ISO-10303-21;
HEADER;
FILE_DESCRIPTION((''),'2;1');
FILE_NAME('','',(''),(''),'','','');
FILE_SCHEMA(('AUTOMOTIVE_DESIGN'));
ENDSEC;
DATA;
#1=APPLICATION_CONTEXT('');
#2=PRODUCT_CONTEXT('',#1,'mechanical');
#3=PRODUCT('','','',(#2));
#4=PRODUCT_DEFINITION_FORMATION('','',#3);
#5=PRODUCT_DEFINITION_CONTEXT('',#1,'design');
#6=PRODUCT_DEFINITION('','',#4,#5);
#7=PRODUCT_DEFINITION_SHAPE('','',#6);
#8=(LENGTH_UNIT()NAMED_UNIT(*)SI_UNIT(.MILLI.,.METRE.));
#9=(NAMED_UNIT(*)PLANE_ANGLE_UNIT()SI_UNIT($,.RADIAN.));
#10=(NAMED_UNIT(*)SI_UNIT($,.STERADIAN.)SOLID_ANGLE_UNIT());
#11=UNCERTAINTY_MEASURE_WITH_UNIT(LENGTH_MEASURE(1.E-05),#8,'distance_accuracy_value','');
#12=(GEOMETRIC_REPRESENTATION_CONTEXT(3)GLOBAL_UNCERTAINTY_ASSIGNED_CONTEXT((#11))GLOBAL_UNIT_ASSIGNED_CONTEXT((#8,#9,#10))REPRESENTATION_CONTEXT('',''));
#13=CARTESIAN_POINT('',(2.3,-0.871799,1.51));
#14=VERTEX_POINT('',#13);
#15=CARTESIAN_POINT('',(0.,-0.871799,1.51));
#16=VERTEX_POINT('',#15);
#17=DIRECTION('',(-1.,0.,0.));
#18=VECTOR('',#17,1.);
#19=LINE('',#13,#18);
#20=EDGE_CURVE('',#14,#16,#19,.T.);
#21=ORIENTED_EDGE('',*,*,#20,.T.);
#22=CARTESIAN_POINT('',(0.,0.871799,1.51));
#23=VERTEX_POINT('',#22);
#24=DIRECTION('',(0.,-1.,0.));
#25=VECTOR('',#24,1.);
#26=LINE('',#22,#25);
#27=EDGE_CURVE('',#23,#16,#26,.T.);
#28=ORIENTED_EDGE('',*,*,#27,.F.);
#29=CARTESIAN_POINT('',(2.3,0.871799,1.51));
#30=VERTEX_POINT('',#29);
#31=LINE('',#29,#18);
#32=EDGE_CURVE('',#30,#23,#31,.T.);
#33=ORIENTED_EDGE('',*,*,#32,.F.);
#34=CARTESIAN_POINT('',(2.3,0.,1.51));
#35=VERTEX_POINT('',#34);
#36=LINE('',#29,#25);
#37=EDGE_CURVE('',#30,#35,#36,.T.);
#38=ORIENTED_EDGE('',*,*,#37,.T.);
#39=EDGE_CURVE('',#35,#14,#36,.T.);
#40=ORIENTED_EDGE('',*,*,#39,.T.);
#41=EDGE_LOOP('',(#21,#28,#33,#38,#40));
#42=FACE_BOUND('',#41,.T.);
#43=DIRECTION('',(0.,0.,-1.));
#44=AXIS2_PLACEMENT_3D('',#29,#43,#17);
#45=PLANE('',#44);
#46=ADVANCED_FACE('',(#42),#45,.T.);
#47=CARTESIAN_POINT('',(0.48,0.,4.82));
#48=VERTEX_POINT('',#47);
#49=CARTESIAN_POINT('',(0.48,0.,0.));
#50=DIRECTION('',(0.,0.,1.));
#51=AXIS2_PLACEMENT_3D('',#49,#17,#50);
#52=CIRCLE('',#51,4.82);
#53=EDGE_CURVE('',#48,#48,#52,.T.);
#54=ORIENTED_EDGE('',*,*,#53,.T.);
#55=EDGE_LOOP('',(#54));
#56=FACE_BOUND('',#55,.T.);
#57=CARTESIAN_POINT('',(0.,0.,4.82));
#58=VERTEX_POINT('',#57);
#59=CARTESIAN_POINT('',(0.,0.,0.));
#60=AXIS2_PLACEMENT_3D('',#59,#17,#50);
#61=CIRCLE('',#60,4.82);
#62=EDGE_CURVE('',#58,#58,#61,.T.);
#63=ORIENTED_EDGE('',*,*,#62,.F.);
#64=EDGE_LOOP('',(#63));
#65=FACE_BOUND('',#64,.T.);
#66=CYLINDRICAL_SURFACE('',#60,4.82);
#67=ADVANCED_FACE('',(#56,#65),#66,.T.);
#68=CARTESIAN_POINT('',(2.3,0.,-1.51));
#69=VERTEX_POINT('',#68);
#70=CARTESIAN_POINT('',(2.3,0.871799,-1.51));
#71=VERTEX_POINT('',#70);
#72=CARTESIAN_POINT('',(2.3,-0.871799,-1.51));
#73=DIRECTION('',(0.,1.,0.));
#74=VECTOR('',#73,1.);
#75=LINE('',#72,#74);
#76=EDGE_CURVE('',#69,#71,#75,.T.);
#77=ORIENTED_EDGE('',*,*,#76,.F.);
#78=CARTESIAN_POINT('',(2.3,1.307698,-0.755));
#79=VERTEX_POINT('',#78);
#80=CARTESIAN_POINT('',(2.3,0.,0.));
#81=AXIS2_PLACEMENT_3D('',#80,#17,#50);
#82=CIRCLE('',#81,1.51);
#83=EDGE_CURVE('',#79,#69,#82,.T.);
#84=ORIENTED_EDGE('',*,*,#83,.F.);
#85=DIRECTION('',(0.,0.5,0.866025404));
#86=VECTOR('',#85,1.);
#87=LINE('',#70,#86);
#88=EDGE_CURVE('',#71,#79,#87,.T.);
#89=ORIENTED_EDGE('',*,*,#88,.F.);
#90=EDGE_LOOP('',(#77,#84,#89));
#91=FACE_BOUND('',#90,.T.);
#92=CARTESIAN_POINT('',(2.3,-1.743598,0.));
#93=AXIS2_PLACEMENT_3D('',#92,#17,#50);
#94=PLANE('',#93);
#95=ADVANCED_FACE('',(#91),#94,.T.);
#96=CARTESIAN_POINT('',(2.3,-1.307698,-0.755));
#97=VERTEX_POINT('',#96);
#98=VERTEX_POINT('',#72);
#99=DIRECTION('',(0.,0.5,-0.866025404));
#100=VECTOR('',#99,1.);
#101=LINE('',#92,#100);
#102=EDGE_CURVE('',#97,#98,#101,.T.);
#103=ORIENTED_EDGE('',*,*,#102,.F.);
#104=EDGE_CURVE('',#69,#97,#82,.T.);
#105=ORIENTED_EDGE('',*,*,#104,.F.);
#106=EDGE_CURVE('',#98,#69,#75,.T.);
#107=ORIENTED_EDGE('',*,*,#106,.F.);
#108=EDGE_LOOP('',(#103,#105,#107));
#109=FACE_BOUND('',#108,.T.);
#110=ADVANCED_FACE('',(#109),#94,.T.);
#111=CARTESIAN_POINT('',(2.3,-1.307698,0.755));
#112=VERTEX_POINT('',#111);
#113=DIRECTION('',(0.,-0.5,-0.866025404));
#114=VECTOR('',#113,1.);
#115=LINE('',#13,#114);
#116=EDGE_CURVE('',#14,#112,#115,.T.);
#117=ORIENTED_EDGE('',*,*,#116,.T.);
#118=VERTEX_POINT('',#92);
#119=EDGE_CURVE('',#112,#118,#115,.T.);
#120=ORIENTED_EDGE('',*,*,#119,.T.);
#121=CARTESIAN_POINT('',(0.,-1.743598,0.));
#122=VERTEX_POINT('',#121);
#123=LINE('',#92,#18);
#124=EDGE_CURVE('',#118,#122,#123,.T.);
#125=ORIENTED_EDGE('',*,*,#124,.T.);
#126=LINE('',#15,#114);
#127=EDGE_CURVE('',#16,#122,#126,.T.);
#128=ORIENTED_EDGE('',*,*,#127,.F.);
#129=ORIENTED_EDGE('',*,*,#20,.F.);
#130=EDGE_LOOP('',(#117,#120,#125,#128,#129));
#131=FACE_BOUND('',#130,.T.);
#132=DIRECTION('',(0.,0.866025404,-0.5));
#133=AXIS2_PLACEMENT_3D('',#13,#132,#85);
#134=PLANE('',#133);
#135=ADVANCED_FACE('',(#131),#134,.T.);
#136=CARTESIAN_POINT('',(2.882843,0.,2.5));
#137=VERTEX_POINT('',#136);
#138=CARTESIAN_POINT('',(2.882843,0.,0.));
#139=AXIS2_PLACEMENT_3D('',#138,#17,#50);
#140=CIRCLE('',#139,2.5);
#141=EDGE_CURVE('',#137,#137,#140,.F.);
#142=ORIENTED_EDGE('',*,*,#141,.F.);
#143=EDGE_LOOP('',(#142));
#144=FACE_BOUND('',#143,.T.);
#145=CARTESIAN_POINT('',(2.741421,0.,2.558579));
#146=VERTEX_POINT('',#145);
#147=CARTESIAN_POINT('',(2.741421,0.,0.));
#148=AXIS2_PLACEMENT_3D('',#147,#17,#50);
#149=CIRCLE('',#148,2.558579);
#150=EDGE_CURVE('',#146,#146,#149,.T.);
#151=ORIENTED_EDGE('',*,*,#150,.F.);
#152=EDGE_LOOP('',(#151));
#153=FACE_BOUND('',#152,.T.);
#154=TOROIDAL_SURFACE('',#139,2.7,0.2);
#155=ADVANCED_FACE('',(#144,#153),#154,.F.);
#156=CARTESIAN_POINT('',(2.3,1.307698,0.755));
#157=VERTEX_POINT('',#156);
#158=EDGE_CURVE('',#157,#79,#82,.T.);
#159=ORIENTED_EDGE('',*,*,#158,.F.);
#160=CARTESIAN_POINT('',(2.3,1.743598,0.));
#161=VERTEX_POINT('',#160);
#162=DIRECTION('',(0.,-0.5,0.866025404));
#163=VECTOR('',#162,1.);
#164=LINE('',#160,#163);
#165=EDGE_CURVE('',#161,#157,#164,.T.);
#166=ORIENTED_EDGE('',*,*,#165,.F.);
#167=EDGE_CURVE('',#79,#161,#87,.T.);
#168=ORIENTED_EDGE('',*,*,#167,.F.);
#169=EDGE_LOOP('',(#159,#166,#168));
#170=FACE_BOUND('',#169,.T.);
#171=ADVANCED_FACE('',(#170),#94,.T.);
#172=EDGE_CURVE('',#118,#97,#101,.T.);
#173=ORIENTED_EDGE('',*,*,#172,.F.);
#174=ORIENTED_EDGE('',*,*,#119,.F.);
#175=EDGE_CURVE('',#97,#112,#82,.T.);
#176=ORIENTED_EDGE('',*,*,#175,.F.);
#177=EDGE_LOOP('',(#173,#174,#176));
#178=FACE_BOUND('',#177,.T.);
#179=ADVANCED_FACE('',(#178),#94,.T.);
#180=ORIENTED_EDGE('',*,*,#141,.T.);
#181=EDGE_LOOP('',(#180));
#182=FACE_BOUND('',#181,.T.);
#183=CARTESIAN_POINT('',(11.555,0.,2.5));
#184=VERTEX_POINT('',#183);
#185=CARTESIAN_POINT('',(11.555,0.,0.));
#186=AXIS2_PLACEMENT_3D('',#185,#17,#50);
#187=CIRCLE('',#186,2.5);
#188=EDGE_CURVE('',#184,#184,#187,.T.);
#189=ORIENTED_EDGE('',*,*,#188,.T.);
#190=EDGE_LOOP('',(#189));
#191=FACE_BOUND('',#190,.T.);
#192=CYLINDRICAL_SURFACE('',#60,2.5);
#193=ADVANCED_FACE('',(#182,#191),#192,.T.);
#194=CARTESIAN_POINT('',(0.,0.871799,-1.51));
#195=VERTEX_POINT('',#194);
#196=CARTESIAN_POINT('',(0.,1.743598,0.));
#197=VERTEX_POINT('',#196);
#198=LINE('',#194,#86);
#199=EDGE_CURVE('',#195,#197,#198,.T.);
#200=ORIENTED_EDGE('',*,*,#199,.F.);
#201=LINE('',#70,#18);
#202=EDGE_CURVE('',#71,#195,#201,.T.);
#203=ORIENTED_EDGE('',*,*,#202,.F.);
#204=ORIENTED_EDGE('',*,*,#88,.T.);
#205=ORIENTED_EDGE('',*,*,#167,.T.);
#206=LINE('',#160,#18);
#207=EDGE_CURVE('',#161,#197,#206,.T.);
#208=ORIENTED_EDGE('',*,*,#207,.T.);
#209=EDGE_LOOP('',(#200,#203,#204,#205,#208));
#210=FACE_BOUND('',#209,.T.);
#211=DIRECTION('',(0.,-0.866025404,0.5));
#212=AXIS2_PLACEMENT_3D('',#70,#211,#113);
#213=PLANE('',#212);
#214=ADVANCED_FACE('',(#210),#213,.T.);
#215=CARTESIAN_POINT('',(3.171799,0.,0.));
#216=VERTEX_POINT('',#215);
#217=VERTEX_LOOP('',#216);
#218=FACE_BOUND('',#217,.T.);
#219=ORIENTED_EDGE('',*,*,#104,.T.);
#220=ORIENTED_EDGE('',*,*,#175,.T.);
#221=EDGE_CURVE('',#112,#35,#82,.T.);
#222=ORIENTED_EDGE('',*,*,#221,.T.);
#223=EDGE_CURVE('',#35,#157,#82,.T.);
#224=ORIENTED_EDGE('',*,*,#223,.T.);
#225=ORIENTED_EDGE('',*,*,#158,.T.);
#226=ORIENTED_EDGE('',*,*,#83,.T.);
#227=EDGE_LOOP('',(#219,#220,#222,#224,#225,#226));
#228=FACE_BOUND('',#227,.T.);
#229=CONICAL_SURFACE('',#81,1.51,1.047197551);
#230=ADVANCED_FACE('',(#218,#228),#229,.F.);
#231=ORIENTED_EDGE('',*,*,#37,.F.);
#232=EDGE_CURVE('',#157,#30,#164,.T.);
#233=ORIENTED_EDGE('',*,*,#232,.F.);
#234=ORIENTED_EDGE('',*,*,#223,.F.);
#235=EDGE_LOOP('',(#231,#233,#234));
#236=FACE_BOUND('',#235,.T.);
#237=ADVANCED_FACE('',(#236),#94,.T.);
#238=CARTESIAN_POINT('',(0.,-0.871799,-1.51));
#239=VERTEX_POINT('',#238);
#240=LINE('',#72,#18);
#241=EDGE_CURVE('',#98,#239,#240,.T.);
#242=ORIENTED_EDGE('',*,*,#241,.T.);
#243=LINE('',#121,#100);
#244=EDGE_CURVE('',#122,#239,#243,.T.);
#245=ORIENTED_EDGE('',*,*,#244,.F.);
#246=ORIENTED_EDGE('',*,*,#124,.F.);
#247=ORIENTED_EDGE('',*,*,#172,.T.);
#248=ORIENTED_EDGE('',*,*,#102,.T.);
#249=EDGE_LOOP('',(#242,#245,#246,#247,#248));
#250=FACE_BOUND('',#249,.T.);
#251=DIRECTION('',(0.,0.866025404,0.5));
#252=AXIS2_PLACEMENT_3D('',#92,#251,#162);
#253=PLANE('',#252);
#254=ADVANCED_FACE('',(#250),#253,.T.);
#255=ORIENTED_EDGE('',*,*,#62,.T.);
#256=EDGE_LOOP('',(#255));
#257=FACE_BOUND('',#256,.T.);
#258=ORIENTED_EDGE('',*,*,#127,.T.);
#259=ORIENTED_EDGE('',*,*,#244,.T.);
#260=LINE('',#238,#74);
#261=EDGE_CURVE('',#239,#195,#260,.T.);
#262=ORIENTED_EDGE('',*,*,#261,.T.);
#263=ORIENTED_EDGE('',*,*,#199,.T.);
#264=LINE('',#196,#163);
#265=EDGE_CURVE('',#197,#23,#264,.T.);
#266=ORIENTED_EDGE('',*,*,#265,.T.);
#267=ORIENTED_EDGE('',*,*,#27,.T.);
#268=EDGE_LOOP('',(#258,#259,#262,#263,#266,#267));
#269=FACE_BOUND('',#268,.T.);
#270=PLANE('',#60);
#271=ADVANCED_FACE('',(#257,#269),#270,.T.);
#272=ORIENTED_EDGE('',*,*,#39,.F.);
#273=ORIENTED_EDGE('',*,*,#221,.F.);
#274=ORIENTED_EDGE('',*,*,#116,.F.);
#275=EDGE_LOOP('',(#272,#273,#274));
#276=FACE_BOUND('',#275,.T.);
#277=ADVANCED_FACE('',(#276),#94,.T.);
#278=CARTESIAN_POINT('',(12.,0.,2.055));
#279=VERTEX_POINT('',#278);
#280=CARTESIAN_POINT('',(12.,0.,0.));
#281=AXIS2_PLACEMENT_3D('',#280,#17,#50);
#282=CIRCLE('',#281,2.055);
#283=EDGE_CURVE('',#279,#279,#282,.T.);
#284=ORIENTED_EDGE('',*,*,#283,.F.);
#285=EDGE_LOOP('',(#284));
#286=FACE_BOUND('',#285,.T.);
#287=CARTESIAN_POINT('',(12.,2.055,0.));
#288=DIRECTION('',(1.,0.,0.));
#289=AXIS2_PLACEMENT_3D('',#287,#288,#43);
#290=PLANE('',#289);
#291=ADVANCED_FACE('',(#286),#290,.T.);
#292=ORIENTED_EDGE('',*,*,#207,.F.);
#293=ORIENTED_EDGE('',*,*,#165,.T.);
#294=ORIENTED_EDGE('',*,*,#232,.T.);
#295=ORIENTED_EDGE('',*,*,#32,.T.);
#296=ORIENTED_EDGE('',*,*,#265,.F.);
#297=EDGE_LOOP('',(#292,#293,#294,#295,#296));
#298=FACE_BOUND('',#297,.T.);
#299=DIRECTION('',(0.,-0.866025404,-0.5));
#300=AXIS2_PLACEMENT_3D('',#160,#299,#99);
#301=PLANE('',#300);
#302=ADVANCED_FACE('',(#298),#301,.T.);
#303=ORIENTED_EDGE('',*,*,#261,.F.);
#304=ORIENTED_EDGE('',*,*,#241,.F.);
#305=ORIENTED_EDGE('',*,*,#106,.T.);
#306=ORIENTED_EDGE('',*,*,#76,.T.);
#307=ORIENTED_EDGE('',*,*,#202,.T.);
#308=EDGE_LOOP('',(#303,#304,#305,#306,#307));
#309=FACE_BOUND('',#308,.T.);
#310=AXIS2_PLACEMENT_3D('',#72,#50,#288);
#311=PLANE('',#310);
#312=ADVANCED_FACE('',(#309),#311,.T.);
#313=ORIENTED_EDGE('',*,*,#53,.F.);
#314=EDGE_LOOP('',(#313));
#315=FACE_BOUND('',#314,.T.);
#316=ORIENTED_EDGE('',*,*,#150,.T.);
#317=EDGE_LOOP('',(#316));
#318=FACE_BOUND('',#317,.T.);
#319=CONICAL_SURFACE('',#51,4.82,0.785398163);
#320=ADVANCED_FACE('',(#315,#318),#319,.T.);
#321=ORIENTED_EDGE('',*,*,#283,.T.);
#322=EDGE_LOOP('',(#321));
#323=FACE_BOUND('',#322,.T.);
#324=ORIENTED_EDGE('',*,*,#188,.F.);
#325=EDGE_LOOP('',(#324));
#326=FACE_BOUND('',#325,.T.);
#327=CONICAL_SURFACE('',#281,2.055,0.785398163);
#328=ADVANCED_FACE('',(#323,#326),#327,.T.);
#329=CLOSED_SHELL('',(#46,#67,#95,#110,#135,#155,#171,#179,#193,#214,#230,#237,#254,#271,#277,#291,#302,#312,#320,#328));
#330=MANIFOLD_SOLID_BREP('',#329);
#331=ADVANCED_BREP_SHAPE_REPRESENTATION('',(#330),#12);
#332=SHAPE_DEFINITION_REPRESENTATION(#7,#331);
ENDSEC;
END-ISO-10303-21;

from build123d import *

# Parameters (mm, degrees)
FILLET1_R   = 0.2
HEX_START   = -2.3
HEX_2_DEPTH = 2.3


with BuildPart() as part:
    # BodySke → BaseBody (revolve)
    with BuildSketch(Plane.XY, mode=Mode.PRIVATE) as basebody_sk:
        Polygon((0, 0), (0, 4.82), (0.48, 4.82), (2.8, 2.5), (11.555, 2.5), (12, 2.055), (12, 0), align=None)
    revolve(basebody_sk.sketch.rotate(Axis((0, 0, 0), (1, 0, 0)), 90), axis=Axis((0, 0, 0), (1, 0, 0)))

    # Fillet1
    fillet1_edges = [part.edges().sort_by_distance(p)[0] for p in [
        (2.8, 0, -2.5),
    ]]
    fillet(fillet1_edges, radius=FILLET1_R)

    # Hex 2: read off the stored shape, not the designer's step
    # Hex 2 outline → Hex 2 (cut)
    with BuildSketch(Plane.ZY.offset(HEX_START)):
        Polygon((-1.51, -0.871798906), (0, -1.743597813), (1.51, -0.871798906), (1.51, 0.871798906), (0, 1.743597813), (-1.51, 0.871798906), align=None)
    extrude(amount=HEX_2_DEPTH, mode=Mode.SUBTRACT)

    # Hex 2 2 outline → Hex 2 2 (revolve, cut)
    with BuildSketch(Plane.YX):
        Polygon((1.51, 2.3), (0, 3.171798906), (0, 2.3), align=None)
    revolve(axis=Axis((0, 0, 0), (1, 0, 0)), mode=Mode.SUBTRACT)


solid = part.part
